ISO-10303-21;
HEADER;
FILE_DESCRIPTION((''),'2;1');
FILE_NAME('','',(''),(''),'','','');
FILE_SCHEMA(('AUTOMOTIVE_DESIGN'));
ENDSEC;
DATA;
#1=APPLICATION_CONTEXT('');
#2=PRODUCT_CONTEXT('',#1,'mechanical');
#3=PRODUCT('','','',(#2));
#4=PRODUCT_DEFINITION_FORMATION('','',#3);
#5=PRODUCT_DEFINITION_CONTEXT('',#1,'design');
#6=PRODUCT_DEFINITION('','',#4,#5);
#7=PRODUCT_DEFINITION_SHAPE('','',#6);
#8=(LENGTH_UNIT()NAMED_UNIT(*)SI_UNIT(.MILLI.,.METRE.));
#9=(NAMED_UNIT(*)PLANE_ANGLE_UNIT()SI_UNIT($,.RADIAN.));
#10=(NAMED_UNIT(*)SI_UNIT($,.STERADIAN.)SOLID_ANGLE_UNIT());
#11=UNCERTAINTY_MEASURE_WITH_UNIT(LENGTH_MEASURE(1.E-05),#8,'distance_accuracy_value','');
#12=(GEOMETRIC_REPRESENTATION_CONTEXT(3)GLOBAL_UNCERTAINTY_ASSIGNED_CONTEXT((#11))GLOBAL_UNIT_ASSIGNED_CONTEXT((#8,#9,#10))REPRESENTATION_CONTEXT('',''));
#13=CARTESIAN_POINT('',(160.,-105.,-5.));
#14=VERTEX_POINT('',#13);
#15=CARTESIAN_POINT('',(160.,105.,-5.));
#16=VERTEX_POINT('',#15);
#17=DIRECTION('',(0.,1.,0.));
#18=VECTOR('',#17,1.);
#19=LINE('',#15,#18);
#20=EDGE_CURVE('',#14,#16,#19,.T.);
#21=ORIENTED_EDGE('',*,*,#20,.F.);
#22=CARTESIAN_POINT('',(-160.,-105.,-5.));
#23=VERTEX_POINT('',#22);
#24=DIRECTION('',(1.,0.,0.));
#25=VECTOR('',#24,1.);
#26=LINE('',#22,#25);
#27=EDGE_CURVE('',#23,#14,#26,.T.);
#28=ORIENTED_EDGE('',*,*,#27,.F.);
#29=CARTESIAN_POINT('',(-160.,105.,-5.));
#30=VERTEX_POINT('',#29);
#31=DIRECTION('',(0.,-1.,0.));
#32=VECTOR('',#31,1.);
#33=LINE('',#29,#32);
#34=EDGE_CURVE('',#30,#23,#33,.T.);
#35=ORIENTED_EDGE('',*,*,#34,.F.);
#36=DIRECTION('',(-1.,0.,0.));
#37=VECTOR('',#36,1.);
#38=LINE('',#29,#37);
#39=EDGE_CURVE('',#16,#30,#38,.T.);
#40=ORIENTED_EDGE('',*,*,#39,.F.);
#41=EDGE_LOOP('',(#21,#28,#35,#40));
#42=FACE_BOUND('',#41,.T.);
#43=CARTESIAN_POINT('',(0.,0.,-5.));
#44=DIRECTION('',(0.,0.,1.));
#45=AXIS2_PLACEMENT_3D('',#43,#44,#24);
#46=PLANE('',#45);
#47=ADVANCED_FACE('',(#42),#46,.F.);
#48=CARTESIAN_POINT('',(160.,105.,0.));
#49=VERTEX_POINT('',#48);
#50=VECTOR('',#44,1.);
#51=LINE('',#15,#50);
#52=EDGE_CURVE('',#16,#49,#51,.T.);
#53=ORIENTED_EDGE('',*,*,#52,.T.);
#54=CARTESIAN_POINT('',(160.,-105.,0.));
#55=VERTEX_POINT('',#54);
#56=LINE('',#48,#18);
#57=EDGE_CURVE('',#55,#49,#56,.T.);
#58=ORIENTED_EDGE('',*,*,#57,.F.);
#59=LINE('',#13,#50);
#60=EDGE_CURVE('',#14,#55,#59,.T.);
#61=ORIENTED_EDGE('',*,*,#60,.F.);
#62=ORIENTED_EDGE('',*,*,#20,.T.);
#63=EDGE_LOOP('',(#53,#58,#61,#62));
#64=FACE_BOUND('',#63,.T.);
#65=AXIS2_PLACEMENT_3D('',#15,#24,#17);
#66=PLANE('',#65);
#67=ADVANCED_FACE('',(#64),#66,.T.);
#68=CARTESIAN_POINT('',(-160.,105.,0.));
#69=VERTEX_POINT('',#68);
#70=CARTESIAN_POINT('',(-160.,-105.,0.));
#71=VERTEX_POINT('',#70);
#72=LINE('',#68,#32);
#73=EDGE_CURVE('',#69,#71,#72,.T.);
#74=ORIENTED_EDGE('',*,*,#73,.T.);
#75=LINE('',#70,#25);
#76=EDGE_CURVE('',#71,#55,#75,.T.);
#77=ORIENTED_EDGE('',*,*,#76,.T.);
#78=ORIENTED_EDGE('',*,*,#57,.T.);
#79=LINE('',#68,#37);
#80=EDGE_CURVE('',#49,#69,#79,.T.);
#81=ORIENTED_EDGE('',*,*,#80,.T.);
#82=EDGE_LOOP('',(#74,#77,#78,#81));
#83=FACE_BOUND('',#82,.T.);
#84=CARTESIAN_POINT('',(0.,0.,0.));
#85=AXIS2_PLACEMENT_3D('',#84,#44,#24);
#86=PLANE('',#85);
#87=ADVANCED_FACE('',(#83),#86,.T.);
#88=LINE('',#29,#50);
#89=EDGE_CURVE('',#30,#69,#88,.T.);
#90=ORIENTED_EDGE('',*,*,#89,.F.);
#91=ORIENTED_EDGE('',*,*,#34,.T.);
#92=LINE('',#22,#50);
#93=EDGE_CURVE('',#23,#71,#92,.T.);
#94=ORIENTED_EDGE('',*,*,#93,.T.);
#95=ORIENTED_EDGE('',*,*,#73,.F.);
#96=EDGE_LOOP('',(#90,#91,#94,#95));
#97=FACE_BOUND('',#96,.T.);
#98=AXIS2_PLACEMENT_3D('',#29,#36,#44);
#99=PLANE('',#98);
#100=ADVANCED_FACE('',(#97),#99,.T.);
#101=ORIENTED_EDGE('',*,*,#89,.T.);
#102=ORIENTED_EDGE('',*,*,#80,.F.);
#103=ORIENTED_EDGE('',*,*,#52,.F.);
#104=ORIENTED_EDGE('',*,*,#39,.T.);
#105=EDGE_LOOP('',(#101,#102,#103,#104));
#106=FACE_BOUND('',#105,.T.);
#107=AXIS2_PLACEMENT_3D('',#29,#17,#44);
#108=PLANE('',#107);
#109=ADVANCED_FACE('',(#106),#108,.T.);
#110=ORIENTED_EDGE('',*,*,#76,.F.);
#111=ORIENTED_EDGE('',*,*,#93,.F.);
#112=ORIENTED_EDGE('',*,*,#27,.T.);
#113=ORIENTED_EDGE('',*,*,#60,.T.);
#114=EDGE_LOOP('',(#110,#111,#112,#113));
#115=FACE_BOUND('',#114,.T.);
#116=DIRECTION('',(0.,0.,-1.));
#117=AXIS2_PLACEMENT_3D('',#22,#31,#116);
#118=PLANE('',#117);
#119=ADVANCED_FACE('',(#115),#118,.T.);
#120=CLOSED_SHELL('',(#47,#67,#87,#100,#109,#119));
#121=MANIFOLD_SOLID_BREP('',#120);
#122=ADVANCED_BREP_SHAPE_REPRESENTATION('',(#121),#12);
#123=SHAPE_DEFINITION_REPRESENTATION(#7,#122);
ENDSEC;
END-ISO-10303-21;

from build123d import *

# Parameters (mm, degrees)
SKETCH1_W          = 320
SKETCH1_H          = 210
BASE_FLANGE1_DEPTH = 5


# Sheet-metal steps are written as plain solids
with BuildPart() as part:
    # Sketch1 → Base-Flange1 (new body)
    with BuildSketch(Plane.XY):
        Rectangle(SKETCH1_W, SKETCH1_H)
    extrude(amount=-BASE_FLANGE1_DEPTH)


solid = part.part
